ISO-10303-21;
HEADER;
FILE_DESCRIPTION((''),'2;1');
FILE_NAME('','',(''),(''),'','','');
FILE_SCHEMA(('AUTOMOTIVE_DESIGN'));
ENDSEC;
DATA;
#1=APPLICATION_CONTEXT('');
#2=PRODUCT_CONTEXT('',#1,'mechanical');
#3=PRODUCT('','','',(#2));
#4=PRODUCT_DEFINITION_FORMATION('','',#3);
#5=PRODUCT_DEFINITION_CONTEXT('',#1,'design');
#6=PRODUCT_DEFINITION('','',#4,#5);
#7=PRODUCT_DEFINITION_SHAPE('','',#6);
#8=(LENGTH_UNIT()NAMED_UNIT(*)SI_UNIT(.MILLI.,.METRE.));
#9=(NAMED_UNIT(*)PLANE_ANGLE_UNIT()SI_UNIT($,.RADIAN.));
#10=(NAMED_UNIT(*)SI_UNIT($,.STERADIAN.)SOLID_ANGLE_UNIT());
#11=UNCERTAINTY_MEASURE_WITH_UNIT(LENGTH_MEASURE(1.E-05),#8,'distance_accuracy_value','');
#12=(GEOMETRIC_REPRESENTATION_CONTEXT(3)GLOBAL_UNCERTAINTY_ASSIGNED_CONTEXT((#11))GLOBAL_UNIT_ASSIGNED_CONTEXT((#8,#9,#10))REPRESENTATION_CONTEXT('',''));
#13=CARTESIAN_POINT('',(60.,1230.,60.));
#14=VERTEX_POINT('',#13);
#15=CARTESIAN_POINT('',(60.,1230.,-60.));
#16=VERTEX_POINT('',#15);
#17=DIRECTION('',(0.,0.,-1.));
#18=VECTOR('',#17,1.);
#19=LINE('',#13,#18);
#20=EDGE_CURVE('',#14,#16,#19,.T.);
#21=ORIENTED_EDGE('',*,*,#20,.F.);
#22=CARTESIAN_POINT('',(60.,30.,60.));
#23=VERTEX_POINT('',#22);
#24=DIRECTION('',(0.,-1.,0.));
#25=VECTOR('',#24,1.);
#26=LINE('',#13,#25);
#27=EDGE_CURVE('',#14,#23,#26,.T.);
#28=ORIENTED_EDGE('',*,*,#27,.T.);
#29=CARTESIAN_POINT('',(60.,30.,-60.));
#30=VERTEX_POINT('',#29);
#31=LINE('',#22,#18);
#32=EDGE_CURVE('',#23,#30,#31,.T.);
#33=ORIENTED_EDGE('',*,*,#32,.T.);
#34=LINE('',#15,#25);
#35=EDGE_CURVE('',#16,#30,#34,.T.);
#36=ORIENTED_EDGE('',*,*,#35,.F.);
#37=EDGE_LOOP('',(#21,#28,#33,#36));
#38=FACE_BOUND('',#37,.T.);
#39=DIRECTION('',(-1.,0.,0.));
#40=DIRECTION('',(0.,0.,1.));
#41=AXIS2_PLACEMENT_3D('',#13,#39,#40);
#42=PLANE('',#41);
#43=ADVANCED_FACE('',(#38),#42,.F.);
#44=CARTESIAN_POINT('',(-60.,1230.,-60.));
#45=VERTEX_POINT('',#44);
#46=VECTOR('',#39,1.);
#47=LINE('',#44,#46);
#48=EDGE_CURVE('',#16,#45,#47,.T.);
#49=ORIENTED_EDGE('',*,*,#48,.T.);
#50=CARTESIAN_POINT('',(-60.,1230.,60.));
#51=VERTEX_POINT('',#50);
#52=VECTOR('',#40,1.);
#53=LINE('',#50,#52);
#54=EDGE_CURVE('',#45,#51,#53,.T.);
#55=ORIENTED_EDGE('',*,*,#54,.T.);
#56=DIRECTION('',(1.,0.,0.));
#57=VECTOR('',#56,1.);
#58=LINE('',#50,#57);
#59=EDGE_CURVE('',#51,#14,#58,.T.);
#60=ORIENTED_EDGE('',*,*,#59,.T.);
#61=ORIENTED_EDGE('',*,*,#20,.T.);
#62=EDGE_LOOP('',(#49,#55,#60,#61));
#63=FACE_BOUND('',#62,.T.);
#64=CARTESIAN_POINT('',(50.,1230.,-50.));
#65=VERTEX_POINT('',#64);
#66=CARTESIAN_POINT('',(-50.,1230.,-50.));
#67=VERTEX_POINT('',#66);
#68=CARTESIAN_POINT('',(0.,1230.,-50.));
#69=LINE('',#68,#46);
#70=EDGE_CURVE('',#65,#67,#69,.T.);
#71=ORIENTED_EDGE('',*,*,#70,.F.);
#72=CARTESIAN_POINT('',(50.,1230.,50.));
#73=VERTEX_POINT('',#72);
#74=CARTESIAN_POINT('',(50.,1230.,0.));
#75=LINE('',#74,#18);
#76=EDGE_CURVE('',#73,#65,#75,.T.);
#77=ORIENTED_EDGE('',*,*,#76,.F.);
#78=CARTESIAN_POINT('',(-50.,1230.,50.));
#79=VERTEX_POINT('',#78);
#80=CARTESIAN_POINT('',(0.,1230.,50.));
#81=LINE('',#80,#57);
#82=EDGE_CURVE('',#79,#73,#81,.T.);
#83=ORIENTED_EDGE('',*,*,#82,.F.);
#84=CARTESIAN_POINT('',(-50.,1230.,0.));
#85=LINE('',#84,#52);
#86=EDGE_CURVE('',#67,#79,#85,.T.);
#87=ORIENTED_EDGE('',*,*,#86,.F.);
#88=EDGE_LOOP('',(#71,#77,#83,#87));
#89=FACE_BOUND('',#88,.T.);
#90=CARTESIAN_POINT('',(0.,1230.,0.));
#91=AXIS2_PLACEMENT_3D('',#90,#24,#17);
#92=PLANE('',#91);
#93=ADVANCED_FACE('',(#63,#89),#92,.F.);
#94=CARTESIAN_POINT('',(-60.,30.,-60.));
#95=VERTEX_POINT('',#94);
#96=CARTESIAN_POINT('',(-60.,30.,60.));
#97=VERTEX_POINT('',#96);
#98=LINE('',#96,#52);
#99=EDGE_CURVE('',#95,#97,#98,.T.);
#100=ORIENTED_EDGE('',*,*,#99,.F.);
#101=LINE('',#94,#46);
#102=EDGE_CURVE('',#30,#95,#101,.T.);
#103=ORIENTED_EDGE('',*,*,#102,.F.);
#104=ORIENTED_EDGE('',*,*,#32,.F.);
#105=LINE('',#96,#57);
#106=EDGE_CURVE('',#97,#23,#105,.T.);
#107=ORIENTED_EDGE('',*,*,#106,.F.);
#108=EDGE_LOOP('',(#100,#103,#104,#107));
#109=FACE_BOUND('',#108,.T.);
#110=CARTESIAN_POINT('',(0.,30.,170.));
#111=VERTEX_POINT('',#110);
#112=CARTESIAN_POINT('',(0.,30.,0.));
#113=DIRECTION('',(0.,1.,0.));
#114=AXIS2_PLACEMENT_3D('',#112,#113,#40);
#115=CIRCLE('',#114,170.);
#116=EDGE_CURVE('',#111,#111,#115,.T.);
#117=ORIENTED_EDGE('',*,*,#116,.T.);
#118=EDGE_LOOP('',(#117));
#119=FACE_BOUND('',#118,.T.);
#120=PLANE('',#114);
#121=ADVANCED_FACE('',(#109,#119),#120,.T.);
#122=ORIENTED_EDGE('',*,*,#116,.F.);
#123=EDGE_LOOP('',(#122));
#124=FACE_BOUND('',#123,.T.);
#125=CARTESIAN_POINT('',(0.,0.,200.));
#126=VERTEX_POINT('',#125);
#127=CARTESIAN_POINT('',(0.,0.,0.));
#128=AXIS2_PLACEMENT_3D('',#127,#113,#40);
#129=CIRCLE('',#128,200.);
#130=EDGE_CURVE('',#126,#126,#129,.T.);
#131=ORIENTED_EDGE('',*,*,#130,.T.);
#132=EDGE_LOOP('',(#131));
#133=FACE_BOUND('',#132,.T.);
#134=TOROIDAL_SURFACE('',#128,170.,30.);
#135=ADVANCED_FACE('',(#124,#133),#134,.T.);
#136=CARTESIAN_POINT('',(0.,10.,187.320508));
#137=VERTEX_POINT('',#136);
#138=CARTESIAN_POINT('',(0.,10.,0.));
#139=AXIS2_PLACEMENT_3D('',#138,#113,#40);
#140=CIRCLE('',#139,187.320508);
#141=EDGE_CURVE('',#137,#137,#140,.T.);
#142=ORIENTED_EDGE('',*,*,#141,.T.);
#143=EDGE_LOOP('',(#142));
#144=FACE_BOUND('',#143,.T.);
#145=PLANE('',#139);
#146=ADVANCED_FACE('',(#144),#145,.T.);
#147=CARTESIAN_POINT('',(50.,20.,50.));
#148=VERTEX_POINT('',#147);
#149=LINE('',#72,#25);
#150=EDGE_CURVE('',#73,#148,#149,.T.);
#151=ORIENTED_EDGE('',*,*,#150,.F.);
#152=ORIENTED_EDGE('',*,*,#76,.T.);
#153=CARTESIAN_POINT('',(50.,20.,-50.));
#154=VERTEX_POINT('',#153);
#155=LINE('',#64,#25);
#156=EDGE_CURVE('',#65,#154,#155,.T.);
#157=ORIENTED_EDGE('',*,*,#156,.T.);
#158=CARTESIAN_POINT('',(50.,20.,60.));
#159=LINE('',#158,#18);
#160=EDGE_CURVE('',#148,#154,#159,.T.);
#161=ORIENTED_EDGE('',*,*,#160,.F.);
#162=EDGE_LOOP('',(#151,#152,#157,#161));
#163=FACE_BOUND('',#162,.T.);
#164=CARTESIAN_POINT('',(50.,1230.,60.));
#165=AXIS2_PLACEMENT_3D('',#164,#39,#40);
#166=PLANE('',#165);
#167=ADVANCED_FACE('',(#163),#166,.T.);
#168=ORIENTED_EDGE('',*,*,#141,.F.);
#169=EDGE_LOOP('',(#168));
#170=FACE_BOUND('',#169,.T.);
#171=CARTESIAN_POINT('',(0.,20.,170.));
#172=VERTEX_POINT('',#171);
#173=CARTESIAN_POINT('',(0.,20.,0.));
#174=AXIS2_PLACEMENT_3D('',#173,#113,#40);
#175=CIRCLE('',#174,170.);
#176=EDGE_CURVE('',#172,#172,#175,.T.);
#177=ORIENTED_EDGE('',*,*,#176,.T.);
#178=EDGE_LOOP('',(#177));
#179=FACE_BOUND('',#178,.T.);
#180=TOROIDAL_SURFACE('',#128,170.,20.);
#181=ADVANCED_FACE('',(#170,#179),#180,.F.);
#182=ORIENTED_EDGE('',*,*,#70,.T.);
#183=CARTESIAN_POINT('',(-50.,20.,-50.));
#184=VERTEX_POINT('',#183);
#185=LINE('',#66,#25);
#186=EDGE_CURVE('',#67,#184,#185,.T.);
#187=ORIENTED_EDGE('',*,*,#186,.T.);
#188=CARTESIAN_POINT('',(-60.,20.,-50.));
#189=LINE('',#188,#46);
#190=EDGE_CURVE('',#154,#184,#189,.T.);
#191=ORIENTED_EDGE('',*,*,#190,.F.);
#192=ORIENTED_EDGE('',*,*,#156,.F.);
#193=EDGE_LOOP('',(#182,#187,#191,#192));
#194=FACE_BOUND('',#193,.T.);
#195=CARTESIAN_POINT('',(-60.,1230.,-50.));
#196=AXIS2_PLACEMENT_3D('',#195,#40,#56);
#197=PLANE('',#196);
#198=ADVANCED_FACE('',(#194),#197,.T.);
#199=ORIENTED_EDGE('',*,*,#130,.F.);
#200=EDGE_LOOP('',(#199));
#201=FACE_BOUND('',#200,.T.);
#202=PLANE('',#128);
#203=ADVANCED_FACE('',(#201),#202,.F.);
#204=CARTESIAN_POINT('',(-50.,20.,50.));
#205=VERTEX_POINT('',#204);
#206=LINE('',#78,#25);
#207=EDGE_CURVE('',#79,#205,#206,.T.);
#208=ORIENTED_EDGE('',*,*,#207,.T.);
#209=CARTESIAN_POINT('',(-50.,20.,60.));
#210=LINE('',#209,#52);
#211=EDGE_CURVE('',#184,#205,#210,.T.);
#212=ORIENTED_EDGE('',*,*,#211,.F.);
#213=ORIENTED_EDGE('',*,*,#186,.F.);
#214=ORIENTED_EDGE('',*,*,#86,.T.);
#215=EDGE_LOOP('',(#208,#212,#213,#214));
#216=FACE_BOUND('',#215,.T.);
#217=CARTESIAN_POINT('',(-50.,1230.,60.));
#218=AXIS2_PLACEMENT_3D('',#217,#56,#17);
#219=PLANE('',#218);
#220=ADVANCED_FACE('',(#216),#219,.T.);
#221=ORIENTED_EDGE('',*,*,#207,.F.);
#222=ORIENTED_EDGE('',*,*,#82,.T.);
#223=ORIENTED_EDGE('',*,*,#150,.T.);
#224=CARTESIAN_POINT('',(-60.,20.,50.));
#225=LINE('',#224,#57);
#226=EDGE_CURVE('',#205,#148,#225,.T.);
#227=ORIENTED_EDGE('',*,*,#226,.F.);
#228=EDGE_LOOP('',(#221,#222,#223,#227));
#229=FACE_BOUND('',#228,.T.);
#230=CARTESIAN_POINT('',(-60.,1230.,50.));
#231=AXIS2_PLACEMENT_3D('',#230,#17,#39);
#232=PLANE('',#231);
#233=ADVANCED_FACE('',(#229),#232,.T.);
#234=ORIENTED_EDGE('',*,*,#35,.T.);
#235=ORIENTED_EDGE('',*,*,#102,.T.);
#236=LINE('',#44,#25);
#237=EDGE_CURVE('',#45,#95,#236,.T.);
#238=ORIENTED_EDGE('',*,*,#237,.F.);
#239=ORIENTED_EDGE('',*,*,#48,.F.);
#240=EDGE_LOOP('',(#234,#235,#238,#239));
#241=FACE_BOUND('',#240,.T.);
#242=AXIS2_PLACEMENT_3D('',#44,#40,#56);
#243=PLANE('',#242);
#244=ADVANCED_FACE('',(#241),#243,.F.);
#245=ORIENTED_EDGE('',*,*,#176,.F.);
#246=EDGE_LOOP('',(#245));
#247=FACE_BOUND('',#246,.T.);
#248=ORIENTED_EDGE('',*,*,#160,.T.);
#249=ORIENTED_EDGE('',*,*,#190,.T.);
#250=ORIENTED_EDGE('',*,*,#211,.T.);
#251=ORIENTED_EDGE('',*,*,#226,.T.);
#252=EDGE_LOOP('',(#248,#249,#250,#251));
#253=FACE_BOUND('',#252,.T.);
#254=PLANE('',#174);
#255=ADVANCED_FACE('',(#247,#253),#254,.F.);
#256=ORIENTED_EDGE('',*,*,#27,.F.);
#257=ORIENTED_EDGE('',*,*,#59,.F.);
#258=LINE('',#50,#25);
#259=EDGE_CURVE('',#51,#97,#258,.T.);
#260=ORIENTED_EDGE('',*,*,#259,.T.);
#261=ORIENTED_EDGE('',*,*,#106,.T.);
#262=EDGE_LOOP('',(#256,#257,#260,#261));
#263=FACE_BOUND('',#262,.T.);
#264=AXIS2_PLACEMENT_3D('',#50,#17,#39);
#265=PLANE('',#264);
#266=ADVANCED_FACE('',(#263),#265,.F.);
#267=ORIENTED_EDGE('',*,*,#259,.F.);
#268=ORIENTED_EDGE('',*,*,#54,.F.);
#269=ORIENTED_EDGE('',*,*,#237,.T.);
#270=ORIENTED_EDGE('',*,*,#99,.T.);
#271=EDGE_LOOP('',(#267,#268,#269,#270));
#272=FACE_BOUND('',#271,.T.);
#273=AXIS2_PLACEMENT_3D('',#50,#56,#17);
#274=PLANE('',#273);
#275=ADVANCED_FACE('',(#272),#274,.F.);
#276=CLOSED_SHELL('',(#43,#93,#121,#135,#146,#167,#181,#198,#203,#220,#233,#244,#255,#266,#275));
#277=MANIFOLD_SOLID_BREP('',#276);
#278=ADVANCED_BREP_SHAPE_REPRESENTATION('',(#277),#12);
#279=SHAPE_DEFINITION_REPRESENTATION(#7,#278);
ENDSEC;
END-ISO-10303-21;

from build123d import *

# Parameters (mm, degrees)
SKETCH1_R           = 200
BOSS_EXTRUDE1_DEPTH = 30
FILLET1_R           = 30
SKETCH2_W           = 120
SKETCH2_H           = 120
BOSS_EXTRUDE2_DEPTH = 1200
SHELL1_T            = -10


with BuildPart() as part:
    # Sketch1 → Boss-Extrude1 (new body)
    with BuildSketch(Plane(origin=(0, 0, 0), x_dir=(1, 0, 0), z_dir=(0, 1, 0))):
        with Locations(Location((0, 0, 0), (0, 0, 270))):
            Circle(SKETCH1_R)
    extrude(amount=BOSS_EXTRUDE1_DEPTH)

    # Fillet1
    fillet1_edges = [part.edges().sort_by_distance(p)[0] for p in [
        (0, 30, -200),
    ]]
    fillet(fillet1_edges, radius=FILLET1_R - 0.0001)  # a hair under: the kernel refuses the full size

    # Sketch2 → Boss-Extrude2 (add)
    with BuildSketch(Plane(origin=(0, 30, 0), x_dir=(1, 0, 0), z_dir=(0, 1, 0))):
        Rectangle(SKETCH2_W, SKETCH2_H)
    extrude(amount=BOSS_EXTRUDE2_DEPTH)

    # Shell1
    shell1_openings = [part.faces().sort_by_distance(p)[0] for p in [
        (0, 1230, 0),
    ]]
    offset(amount=SHELL1_T, openings=shell1_openings, kind=Kind.INTERSECTION)


solid = part.part
